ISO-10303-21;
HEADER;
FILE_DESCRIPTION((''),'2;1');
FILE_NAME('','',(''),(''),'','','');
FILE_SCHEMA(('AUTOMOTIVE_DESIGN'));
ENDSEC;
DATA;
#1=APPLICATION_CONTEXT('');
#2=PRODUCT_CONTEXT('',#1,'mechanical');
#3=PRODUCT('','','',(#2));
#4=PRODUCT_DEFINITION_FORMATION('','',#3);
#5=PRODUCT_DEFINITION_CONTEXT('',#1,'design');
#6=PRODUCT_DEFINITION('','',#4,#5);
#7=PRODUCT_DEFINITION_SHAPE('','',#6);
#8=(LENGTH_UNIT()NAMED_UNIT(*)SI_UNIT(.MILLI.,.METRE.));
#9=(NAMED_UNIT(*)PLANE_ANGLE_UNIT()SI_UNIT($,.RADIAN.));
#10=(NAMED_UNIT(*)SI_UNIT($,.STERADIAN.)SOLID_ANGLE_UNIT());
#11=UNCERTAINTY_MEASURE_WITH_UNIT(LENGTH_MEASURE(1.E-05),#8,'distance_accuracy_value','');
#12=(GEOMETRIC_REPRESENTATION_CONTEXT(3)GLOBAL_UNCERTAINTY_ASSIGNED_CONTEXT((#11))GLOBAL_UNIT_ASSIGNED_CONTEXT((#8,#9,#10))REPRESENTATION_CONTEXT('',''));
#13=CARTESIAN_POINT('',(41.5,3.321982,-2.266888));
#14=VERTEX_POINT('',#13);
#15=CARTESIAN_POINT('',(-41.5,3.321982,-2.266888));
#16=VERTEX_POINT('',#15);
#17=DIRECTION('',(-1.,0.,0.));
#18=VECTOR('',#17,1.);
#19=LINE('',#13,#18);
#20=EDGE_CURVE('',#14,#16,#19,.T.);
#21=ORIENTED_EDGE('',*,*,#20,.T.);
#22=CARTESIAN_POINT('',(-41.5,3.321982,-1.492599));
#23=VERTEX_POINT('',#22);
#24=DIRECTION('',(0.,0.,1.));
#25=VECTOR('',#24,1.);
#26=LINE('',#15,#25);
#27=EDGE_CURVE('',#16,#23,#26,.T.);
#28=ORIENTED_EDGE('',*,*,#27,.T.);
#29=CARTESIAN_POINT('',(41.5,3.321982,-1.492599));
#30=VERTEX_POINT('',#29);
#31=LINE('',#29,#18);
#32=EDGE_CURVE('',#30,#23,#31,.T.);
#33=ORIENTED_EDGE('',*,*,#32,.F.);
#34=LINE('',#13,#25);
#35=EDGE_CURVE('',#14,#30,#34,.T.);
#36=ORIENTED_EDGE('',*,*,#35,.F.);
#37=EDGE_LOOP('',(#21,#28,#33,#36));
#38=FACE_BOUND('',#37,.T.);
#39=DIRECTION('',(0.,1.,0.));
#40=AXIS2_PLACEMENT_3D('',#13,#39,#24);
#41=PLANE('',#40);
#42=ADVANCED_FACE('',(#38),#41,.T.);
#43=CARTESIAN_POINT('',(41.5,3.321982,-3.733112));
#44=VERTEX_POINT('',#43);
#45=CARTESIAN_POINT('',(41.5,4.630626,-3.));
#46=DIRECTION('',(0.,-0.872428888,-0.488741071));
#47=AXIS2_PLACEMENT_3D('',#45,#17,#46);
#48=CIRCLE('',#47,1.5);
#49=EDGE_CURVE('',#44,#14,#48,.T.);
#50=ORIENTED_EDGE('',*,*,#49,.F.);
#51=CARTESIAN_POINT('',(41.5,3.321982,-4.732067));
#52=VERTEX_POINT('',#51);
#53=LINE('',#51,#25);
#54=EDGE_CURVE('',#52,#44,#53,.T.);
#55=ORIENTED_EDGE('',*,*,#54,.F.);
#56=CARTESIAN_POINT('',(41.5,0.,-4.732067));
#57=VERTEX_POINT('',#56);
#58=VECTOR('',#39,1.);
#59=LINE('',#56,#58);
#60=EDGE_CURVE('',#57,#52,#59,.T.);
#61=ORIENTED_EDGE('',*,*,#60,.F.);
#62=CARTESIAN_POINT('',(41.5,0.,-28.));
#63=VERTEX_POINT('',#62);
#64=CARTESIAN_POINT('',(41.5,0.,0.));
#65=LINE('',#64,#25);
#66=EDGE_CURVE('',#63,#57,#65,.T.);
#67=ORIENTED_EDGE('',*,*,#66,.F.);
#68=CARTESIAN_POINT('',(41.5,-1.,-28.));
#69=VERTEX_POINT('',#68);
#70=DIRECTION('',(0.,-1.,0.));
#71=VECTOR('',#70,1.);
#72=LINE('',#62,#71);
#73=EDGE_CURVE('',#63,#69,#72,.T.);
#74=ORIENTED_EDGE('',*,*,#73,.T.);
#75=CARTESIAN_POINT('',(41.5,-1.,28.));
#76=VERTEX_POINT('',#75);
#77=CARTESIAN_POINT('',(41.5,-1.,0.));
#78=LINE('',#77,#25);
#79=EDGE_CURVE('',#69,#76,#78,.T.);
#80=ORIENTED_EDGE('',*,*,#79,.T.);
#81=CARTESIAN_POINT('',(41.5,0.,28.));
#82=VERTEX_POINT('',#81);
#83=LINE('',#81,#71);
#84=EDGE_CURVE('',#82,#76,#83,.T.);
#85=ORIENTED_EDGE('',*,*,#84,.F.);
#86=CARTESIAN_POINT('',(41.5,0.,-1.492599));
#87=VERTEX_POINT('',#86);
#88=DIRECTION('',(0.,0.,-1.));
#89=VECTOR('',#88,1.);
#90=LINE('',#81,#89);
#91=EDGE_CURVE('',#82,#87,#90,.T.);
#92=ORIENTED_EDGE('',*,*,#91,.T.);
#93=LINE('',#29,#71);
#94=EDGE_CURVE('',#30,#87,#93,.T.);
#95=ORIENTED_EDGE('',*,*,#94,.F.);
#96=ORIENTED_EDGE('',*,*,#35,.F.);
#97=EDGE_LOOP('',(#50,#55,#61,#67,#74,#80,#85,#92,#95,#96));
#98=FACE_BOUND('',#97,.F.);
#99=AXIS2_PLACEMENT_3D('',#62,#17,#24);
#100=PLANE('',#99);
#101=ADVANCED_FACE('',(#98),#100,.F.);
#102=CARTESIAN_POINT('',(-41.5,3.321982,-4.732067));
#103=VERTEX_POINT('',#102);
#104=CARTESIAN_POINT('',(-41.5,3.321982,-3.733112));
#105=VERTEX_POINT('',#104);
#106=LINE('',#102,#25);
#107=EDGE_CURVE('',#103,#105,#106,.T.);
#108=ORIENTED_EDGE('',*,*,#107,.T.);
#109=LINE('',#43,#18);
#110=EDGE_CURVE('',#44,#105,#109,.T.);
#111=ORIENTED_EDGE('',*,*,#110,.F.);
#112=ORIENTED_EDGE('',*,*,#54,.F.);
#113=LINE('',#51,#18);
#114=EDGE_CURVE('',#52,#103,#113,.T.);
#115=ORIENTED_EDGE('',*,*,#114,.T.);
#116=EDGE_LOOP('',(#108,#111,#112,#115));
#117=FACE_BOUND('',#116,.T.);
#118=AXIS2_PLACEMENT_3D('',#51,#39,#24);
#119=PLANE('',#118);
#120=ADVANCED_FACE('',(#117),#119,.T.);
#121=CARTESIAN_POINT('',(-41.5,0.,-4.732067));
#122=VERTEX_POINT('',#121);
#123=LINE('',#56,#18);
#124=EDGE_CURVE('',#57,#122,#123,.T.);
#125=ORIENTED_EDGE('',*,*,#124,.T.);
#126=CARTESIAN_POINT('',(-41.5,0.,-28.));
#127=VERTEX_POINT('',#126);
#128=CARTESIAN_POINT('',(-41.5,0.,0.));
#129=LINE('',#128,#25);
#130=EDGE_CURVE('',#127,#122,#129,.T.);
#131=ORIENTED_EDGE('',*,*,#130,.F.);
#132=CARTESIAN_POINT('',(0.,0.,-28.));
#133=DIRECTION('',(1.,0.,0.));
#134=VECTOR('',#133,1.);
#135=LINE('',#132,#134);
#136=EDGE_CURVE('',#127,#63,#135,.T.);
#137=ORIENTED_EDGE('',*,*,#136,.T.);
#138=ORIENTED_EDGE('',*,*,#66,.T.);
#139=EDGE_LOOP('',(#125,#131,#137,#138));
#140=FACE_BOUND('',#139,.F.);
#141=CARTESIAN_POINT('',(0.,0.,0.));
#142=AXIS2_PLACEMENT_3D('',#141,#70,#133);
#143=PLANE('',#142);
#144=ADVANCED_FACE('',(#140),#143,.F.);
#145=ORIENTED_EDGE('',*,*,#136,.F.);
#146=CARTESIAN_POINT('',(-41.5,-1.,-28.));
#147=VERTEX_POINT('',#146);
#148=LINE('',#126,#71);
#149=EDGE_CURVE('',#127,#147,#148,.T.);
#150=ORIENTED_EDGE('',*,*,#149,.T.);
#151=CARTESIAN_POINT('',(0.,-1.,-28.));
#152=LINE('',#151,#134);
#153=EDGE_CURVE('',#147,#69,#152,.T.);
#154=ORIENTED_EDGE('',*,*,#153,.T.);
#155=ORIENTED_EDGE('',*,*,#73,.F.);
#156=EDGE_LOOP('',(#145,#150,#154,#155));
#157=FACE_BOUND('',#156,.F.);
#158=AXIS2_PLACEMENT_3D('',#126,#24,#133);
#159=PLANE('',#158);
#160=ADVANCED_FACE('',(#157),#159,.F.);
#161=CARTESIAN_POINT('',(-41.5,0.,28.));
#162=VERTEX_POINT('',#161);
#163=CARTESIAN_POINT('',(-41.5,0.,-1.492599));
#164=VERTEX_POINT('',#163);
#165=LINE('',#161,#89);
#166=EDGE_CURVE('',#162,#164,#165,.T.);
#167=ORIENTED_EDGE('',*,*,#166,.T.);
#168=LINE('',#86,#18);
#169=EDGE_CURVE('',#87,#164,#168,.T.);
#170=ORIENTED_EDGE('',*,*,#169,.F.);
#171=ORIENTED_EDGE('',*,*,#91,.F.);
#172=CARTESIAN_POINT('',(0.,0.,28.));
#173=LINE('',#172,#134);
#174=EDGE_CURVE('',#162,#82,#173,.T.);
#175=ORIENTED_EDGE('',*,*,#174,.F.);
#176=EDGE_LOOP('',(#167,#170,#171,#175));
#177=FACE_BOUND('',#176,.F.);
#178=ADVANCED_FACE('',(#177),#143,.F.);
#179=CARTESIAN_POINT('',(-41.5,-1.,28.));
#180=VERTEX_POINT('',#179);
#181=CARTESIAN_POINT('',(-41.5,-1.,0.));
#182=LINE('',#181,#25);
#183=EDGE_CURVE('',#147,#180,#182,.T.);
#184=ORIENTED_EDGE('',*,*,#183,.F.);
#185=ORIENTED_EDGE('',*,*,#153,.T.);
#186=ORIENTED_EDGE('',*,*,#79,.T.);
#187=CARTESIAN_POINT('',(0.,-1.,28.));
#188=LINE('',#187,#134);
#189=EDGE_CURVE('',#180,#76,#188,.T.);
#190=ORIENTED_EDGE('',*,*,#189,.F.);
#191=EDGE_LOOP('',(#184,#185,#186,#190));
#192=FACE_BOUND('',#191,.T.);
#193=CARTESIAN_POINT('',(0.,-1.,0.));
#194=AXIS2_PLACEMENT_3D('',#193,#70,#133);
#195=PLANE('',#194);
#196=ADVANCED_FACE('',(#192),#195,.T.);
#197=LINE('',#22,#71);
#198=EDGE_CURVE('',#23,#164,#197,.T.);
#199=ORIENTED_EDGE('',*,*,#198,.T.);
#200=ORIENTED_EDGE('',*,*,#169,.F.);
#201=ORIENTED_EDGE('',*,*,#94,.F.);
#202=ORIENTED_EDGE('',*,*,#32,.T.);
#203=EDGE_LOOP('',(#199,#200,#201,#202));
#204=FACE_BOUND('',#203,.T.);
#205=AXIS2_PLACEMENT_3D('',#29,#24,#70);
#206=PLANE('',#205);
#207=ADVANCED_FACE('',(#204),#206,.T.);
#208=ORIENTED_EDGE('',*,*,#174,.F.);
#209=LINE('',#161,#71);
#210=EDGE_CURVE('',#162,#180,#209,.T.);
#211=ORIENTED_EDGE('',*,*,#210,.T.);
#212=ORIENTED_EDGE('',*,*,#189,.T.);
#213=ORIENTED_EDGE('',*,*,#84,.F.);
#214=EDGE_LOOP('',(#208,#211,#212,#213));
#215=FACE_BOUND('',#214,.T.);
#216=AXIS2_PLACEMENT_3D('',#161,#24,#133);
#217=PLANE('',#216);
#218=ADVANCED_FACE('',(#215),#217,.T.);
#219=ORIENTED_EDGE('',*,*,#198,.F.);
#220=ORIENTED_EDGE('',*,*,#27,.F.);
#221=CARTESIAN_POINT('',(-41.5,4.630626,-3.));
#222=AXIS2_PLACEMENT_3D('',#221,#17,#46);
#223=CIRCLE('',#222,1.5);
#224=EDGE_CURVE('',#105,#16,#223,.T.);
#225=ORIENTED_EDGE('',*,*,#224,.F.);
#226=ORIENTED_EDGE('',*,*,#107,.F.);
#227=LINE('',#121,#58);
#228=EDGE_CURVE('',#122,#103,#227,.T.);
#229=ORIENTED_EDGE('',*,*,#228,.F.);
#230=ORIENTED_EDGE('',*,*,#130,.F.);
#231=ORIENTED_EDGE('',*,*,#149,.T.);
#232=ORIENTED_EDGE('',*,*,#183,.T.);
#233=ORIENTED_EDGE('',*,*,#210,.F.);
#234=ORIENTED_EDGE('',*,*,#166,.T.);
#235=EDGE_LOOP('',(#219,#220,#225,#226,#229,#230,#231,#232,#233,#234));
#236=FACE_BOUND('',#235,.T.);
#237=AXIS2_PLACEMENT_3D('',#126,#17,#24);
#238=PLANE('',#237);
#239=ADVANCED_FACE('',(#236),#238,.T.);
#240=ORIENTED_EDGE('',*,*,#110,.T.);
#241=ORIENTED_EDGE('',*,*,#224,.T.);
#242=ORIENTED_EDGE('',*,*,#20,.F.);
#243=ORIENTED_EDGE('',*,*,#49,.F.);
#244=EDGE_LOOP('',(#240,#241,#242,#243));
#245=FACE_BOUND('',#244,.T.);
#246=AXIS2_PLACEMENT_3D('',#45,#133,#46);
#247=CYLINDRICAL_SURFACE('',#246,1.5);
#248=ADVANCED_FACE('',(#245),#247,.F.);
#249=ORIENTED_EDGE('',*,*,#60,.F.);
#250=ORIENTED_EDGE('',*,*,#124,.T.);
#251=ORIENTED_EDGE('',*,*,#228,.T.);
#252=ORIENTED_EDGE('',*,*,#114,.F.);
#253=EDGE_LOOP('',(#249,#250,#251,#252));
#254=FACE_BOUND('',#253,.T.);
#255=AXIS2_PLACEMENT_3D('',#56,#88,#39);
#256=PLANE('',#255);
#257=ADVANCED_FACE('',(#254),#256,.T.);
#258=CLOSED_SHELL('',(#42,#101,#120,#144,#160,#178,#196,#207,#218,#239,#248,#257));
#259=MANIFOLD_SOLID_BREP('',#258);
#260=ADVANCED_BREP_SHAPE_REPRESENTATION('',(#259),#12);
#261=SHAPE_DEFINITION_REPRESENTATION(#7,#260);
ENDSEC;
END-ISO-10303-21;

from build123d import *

# Parameters (mm, degrees)
F0_W     = 83
F0_H     = 56
F1_DEPTH = 1
F3_DEPTH = 83


# Not quite as in the source:
# - a feature names something its author has since deleted; it is built from what else it names


with BuildPart() as f1:
    # F0 (on Front) → F1 (new body)
    with BuildSketch(Plane.XZ):
        Rectangle(F0_W, F0_H)
    extrude(amount=F1_DEPTH)

    # F2 (on face) → F3 (join)
    with BuildSketch(Plane.YZ.offset(41.5)):
        with BuildLine():
            ThreePointArc((3.3219824545, -3.733111607), (3.130625787, -3), (3.3219824545, -2.266888393))
            Line((3.3219824545, -2.266888393), (3.3219824545, -1.492598909))
            Line((3.3219824545, -1.492598909), (0, -1.492598909))
            Line((0, -1.492598909), (0, -4.7320667654))
            Line((0, -4.7320667654), (3.3219824545, -4.7320667654))
            Line((3.3219824545, -4.7320667654), (3.3219824545, -3.733111607))
        make_face()
        with BuildLine():
            ThreePointArc((0, 27.0385164807), (-0.1, 26.5), (0, 25.9614835193))
            Line((0, 25.9614835193), (0, 27.0385164807))
        make_face()
    extrude(amount=-F3_DEPTH)


solid = f1.part
